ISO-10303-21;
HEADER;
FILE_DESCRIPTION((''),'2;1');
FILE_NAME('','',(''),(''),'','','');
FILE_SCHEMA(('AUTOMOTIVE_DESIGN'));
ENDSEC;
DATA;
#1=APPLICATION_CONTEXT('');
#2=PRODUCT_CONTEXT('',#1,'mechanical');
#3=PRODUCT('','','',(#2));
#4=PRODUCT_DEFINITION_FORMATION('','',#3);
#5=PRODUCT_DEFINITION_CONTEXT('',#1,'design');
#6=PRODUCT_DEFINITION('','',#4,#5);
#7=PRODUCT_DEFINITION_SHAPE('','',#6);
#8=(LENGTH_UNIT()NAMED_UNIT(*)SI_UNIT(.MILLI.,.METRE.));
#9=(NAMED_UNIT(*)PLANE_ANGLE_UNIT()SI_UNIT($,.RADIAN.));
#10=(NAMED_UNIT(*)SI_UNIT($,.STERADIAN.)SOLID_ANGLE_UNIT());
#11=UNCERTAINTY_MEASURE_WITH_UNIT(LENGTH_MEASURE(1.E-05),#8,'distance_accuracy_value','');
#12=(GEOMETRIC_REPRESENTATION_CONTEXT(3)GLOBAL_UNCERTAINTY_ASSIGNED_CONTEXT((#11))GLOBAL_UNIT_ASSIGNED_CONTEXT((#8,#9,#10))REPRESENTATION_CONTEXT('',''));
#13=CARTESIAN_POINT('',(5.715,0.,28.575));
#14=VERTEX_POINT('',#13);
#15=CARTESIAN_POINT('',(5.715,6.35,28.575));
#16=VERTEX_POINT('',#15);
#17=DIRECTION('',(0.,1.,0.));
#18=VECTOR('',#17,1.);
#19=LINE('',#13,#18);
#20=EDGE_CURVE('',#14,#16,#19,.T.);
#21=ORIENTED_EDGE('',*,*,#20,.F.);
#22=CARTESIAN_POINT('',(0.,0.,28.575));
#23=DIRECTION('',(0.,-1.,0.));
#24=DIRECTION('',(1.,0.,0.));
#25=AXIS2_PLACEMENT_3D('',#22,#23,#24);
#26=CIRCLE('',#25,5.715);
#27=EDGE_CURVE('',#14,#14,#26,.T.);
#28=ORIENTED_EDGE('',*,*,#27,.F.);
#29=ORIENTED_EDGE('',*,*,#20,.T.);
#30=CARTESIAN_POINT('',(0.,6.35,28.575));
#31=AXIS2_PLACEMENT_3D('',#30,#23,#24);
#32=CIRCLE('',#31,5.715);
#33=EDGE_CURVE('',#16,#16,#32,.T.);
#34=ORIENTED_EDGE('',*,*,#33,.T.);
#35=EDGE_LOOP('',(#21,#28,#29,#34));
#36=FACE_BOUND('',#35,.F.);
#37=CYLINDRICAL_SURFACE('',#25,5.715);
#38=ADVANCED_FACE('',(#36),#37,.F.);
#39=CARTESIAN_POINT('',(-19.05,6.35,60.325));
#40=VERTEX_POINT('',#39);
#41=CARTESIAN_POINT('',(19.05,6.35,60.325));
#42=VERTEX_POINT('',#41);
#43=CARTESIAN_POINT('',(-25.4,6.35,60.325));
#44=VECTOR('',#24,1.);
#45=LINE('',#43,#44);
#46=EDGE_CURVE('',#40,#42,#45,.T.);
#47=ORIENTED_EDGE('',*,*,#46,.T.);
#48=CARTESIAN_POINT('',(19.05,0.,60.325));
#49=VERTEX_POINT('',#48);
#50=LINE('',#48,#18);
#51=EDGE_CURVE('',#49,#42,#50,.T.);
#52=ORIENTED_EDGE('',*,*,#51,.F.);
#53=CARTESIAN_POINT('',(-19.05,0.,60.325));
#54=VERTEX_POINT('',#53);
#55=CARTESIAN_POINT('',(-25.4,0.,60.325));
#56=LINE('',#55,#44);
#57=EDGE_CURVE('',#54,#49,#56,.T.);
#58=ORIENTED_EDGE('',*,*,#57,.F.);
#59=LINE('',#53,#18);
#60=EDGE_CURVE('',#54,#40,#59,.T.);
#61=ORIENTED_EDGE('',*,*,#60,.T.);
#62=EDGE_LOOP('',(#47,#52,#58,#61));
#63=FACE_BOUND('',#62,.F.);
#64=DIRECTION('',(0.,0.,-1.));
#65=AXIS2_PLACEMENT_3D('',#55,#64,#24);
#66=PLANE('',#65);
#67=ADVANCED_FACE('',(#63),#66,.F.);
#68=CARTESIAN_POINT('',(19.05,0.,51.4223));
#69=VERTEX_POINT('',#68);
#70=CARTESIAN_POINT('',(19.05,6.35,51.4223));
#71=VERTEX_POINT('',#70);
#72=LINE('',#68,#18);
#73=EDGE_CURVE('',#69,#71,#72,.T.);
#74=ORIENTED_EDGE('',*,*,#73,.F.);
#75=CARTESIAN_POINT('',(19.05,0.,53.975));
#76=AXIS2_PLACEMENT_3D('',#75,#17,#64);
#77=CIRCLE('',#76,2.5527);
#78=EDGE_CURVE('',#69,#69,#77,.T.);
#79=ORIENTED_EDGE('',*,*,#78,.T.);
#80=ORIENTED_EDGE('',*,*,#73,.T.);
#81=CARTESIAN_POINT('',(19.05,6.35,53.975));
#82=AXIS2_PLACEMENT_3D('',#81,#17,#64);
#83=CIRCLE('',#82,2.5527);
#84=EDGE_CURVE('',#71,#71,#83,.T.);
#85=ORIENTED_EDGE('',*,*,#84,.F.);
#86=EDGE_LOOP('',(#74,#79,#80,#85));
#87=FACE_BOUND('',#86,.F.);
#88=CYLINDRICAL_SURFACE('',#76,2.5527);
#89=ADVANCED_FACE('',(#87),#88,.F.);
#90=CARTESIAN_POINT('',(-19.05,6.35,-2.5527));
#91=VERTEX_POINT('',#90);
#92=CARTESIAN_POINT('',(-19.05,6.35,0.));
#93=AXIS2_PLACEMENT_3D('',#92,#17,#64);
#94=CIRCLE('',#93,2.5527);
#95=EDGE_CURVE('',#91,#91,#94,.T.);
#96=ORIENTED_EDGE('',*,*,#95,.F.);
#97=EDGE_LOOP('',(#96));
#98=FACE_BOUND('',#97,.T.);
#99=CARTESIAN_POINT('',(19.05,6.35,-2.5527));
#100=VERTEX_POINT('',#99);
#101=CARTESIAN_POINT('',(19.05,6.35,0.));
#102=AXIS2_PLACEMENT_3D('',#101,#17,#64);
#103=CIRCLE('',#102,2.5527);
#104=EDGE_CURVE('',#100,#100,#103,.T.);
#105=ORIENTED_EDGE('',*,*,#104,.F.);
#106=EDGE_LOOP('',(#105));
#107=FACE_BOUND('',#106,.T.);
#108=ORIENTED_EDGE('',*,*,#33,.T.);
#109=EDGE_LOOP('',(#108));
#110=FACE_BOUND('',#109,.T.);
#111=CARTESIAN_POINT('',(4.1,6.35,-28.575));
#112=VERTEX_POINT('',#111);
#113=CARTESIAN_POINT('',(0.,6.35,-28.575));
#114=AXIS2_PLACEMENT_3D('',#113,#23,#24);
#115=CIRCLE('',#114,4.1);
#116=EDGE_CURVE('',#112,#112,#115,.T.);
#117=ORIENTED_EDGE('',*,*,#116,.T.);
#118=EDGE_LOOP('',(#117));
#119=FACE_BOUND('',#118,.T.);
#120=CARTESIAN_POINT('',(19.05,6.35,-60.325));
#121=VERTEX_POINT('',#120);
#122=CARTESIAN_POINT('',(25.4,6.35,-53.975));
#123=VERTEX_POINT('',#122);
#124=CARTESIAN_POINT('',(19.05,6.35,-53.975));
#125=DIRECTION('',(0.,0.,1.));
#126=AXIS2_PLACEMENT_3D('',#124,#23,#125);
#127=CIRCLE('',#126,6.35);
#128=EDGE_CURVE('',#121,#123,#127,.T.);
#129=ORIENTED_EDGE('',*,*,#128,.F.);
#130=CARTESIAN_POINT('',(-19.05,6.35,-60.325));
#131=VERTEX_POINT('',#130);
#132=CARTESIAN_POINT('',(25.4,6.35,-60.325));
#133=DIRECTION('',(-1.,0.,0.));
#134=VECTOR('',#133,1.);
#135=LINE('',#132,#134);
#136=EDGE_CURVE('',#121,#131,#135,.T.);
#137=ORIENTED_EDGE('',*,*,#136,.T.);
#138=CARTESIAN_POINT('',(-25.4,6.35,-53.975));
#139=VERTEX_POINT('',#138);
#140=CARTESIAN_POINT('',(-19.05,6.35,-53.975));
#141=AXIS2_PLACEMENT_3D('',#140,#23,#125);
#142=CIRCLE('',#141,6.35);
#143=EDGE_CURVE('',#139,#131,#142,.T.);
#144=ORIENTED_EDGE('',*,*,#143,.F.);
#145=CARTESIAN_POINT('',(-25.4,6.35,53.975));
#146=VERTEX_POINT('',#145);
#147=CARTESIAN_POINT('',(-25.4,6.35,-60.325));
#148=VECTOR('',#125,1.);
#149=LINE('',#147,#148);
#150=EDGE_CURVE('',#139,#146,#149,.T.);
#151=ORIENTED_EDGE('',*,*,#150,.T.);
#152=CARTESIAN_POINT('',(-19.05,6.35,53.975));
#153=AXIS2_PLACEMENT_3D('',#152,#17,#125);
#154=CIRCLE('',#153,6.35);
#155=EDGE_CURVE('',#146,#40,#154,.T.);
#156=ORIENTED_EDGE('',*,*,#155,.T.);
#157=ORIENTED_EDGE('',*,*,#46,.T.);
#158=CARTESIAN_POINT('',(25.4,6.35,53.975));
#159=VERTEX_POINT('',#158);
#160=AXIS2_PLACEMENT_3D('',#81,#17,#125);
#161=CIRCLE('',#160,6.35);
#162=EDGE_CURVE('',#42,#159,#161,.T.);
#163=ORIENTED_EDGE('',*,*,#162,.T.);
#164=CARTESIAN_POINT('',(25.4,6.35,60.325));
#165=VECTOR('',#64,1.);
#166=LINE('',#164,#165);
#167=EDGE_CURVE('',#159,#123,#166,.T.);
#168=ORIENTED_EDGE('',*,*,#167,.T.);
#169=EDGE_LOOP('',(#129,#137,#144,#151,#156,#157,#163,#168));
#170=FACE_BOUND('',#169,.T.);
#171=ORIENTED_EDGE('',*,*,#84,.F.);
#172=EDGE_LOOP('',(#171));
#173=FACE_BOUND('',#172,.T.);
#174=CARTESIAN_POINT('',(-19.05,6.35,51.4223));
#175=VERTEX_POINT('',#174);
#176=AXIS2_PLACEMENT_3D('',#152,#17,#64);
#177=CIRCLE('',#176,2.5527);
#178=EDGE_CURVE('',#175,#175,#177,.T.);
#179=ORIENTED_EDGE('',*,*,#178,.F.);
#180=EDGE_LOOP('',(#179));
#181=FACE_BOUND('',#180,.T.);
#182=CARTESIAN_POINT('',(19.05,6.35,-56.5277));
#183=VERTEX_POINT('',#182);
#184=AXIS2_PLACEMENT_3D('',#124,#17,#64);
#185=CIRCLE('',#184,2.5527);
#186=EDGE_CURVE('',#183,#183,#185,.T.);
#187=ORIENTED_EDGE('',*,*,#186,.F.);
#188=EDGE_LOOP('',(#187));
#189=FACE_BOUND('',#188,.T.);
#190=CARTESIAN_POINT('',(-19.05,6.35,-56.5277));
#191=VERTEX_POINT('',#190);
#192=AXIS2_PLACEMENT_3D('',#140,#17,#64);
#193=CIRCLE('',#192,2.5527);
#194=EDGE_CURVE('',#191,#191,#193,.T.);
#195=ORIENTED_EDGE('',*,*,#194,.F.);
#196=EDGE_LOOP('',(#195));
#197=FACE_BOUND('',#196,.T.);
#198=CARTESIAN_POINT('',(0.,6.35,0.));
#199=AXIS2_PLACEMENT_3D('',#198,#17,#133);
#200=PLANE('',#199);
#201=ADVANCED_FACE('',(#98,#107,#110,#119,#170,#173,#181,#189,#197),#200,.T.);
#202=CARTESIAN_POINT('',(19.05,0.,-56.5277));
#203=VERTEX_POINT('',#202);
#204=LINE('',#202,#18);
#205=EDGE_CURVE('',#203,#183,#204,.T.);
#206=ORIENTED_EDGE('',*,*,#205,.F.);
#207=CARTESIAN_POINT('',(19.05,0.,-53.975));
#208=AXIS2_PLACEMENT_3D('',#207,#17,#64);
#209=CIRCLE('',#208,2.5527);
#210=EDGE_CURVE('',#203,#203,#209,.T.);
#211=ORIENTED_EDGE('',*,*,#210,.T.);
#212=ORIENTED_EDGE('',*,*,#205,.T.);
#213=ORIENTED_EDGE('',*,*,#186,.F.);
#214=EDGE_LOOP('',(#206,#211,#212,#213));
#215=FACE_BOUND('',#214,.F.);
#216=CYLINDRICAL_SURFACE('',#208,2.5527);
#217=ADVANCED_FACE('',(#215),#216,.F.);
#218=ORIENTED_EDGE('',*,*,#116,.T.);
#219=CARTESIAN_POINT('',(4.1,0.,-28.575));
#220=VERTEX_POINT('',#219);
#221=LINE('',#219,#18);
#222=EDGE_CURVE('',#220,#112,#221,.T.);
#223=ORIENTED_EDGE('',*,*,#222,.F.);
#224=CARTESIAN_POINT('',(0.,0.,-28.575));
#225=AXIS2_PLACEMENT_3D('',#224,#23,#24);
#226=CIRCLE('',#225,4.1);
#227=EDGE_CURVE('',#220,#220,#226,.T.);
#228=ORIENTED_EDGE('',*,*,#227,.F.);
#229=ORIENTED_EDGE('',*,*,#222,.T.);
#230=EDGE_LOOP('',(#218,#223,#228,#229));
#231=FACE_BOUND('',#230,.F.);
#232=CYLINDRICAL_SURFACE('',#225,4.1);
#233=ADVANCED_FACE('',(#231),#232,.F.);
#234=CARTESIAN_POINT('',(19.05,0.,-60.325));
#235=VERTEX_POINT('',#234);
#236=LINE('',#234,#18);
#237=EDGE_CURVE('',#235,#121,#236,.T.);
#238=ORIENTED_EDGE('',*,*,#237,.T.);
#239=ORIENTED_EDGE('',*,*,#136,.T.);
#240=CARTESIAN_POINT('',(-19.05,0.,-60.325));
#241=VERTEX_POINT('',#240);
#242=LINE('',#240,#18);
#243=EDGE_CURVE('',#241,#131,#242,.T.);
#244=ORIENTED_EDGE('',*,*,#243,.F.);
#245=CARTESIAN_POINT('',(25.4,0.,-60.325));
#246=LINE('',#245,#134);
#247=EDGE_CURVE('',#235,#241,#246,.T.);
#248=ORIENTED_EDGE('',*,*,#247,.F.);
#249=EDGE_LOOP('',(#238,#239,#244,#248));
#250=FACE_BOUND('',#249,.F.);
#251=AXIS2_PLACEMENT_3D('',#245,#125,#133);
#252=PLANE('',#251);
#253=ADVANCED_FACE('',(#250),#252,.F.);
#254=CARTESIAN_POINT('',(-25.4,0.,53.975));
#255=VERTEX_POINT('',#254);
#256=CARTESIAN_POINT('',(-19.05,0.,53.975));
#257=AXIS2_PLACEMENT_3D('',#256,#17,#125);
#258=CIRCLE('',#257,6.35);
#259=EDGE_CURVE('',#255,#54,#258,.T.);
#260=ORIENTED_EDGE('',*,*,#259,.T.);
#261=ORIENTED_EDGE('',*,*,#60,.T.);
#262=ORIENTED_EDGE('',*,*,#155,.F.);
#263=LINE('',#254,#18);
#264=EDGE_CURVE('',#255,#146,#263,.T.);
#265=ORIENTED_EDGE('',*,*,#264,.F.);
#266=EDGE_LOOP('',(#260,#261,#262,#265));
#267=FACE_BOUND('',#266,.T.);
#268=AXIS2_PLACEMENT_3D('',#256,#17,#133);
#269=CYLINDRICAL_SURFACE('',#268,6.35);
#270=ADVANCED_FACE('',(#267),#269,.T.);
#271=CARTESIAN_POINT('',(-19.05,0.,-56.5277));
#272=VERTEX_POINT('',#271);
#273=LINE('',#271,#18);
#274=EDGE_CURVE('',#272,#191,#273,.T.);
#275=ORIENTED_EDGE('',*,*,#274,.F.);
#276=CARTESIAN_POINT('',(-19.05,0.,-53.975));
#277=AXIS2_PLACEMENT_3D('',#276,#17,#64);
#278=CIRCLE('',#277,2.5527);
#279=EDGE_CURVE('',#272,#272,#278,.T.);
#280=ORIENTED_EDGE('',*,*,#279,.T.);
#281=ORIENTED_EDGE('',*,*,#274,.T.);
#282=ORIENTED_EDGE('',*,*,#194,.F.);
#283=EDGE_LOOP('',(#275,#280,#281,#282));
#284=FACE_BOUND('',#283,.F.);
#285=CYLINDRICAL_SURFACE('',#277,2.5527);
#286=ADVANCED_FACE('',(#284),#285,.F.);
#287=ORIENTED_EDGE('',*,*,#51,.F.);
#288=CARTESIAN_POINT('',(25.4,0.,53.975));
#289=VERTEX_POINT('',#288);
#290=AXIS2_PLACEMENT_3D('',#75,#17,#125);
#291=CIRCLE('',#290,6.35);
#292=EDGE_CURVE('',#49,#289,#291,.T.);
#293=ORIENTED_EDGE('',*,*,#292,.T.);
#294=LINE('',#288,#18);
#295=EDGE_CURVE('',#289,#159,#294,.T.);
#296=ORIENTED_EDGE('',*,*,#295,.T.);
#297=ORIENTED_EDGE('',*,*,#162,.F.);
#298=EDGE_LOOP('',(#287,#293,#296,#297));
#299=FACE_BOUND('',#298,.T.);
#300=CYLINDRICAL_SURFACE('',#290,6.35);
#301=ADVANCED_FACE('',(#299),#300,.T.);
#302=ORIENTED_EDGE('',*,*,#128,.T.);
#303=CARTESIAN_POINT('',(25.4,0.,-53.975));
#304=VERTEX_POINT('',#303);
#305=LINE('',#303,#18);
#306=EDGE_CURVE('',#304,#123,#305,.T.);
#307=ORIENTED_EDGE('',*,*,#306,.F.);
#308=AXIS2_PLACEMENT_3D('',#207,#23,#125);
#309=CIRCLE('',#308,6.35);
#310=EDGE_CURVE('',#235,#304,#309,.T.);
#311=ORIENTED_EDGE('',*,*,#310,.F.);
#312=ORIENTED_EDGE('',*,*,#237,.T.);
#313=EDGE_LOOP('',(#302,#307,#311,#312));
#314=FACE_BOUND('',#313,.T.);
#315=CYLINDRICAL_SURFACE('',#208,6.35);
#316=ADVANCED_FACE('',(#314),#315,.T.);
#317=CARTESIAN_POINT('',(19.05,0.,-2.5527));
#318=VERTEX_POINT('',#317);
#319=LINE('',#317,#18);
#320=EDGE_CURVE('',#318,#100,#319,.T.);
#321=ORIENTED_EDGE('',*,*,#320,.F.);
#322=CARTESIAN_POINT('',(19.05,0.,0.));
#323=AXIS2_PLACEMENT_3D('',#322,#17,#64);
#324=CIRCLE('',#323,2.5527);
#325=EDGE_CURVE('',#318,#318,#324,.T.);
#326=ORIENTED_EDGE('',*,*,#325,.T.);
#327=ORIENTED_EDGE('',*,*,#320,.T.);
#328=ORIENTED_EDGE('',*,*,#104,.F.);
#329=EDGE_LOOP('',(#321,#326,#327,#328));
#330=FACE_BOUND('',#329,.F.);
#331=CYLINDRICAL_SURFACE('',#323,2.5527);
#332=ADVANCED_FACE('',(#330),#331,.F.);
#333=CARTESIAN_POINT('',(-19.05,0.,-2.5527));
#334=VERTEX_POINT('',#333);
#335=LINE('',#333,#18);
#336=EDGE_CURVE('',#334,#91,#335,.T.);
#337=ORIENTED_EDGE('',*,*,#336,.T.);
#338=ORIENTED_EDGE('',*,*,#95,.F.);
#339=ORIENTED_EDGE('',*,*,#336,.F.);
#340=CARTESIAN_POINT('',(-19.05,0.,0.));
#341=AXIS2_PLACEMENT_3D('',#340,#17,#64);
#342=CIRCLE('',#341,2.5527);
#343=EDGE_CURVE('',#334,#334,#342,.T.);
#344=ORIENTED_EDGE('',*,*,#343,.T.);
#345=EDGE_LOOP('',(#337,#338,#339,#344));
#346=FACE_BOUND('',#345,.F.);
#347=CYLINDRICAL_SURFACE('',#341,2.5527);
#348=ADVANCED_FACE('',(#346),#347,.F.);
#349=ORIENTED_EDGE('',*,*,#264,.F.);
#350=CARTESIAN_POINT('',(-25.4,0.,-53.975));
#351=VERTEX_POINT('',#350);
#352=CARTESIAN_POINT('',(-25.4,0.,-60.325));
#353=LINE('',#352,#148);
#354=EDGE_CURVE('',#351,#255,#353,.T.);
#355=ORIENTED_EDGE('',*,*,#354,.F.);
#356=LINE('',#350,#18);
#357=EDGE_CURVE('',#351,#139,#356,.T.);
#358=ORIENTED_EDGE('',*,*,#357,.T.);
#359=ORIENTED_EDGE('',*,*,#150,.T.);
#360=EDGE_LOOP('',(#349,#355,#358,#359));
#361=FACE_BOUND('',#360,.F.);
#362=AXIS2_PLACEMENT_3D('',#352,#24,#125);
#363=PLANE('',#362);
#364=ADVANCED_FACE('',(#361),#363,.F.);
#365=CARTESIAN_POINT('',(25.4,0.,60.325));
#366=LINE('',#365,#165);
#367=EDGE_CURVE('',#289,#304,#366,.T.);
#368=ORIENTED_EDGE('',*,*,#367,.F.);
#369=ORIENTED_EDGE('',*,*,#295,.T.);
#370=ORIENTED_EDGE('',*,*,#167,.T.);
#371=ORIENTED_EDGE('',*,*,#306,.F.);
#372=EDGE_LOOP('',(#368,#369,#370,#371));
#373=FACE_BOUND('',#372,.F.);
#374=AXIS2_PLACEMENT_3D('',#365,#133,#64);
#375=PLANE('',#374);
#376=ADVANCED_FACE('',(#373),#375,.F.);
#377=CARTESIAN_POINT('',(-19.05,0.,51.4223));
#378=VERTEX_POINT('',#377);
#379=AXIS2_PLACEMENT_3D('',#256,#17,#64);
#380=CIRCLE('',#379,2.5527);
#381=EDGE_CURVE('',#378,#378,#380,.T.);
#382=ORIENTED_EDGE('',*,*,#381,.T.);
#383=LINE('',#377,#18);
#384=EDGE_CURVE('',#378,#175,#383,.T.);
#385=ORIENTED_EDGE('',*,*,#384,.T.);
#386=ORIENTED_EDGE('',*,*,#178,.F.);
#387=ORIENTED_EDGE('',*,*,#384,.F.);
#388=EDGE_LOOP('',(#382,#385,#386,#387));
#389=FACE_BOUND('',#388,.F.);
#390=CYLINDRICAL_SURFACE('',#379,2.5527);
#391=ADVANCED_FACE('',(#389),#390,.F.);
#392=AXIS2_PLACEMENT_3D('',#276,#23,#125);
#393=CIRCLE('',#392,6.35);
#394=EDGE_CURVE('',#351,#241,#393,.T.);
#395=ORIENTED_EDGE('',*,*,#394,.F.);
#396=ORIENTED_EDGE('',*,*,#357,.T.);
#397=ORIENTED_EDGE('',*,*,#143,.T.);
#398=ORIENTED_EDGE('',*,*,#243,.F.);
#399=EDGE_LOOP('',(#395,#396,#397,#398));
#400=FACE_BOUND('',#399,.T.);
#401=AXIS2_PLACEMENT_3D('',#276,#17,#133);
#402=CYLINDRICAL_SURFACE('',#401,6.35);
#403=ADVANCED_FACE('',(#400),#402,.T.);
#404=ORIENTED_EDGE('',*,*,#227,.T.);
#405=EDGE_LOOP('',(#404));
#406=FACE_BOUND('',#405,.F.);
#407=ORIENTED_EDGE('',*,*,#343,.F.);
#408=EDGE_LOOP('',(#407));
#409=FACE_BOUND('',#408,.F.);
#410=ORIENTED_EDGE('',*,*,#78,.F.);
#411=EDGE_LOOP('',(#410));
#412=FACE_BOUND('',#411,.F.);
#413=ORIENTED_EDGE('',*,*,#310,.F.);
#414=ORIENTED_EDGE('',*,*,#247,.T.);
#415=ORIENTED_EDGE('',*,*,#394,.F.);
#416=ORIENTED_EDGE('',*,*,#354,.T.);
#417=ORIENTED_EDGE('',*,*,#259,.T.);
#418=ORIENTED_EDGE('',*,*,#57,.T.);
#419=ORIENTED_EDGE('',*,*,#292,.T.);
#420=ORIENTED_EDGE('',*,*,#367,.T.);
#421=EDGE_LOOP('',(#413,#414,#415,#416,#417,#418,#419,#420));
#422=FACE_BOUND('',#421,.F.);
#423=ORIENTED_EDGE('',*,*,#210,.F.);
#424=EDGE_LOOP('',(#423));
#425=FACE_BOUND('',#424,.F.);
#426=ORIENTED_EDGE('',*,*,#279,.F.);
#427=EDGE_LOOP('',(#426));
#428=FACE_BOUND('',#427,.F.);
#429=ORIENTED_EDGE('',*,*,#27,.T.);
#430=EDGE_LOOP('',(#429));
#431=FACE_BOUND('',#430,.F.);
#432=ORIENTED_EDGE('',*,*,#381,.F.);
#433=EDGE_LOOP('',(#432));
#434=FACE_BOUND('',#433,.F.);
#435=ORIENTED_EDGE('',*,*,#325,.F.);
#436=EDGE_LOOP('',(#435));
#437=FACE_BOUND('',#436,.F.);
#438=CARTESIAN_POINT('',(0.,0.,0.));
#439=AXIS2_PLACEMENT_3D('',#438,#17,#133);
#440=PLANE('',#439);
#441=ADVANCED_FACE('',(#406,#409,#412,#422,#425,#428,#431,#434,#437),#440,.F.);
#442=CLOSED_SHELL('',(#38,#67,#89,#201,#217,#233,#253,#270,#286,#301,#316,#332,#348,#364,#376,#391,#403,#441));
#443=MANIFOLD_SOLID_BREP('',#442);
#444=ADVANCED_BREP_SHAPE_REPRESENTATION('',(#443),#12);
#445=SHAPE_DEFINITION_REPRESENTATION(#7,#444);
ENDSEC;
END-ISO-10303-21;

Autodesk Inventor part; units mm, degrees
ref_plane "YZ Plane" through (0, 0, 0) normal (1, 0, 0) x (0, 1, 0)
ref_plane "XZ Plane" through (0, 0, 0) normal (0, 1, 0) x (-1, 0, 0)
ref_plane "XY Plane" through (0, 0, 0) normal (0, 0, 1) x (1, 0, 0)
sketch "Sketch1" plane through (0, 0, 0) normal (0, 1, 0) x (-1, 0, 0)
  line L0 (25.4, 60.325) -> (-25.4, 60.325)
  line L1 (-25.4, 60.325) -> (-25.4, -60.325)
  line L2 (-25.4, -60.325) -> (25.4, -60.325)
  line L3 (25.4, -60.325) -> (25.4, 60.325)
  line L4 (25.4, 60.325) -> (-25.4, -60.325) construction
  line L5 (-25.4, 60.325) -> (25.4, -60.325) construction
  point P0 (0, 0)
  point P1 (0, 28.575)
  point P2 (0, -28.575)
  dimension "d0" = 50.8
  dimension "d1" = 120.65
  dimension "d2" = 57.15
  dimension "d3" = 28.575
extrude "Plate1" add sketch "Sketch1" along normal blind 6.35
sketch "Sketch2" plane through (0, 0, 0) normal (0, -1, 0) x (1, 0, 0)
  circle A0 centre (0, 28.575) radius 5.715
  circle A1 centre (0, -28.575) radius 4.1
  point P0 (0, 0)
  dimension "d5" = 28.575
  dimension "d6" = 11.43
  dimension "d9" = 28.575
  dimension "d10" = 8.2
extrude "Cut1" cut sketch "Sketch2" against normal blind 6.35
sketch "Sketch3" plane through (0, 0, 0) normal (0, -1, 0) x (1, 0, 0)
  line L0 (-25.4, 60.325) -> (25.4, 60.325) construction
  line L1 (-25.4, -60.325) -> (-25.4, 60.325) construction
  circle A0 centre (0, 28.575) radius 5.715 projected
  circle A1 centre (0, 28.575) radius 25.4 construction
  circle A2 centre (0, -28.575) radius 4.1 projected
  circle A3 centre (0, -28.575) radius 25.4 construction
  point P0 (0, 0)
  point P1 (-19.05, 53.975)
  point P2 (19.05, 53.975)
  point P3 (-19.05, 0)
  point P4 (19.05, 0)
  point P5 (-19.05, -53.975)
  point P6 (19.05, -53.975)
  dimension "d13" = 38.1
  dimension "d16" = 53.975
  dimension "d19" = 6.35
  dimension "d20" = 6.35
  dimension "d29" = 50.8
  dimension "d30" = 50.8
hole "Hole1" at (-19.05, 0, 53.975) at (19.05, 0, 53.975) at (-19.05, 0, 0) at (19.05, 0, 0) at (-19.05, 0, -53.975) at (19.05, 0, -53.975) direction (0, 1, 0) diameter 5.1054 end through all clearance for "Flat Head Machine Screw (82)" size "#10" standard "Ansi Unified Screw Threads"
fillet "Corner Round1" radius 6.35 4 edges at (25.4, 3.175, -60.325) (-25.4, 3.175, -60.325) (25.4, 3.175, 60.325) (-25.4, 3.175, 60.325)
equation "\"d9\" = d5"
equation "\"d7\" = Thickness"
equation "\"d26\" = Thickness"
equation "\"d4\" = Thickness"
equation "\"BendRadius\" = Thickness"
equation "\"BendReliefWidth\" = Thickness"
equation "\"BendReliefDepth\" = 0.5 * Thickness"
equation "\"CornerReliefSize\" = 4 * Thickness"
equation "\"MinimumRemnant\" = 2 * Thickness"
equation "\"TransitionRadius\" = BendRadius"
equation "\"JacobiRadiusSize\" = BendRadius"
equation "\"GapSize\" = Thickness"
equation "\"Thickness\" = 6.35"
properties part number "PLATE,MAGNET-MOUNT" material "Aluminum 6061"
